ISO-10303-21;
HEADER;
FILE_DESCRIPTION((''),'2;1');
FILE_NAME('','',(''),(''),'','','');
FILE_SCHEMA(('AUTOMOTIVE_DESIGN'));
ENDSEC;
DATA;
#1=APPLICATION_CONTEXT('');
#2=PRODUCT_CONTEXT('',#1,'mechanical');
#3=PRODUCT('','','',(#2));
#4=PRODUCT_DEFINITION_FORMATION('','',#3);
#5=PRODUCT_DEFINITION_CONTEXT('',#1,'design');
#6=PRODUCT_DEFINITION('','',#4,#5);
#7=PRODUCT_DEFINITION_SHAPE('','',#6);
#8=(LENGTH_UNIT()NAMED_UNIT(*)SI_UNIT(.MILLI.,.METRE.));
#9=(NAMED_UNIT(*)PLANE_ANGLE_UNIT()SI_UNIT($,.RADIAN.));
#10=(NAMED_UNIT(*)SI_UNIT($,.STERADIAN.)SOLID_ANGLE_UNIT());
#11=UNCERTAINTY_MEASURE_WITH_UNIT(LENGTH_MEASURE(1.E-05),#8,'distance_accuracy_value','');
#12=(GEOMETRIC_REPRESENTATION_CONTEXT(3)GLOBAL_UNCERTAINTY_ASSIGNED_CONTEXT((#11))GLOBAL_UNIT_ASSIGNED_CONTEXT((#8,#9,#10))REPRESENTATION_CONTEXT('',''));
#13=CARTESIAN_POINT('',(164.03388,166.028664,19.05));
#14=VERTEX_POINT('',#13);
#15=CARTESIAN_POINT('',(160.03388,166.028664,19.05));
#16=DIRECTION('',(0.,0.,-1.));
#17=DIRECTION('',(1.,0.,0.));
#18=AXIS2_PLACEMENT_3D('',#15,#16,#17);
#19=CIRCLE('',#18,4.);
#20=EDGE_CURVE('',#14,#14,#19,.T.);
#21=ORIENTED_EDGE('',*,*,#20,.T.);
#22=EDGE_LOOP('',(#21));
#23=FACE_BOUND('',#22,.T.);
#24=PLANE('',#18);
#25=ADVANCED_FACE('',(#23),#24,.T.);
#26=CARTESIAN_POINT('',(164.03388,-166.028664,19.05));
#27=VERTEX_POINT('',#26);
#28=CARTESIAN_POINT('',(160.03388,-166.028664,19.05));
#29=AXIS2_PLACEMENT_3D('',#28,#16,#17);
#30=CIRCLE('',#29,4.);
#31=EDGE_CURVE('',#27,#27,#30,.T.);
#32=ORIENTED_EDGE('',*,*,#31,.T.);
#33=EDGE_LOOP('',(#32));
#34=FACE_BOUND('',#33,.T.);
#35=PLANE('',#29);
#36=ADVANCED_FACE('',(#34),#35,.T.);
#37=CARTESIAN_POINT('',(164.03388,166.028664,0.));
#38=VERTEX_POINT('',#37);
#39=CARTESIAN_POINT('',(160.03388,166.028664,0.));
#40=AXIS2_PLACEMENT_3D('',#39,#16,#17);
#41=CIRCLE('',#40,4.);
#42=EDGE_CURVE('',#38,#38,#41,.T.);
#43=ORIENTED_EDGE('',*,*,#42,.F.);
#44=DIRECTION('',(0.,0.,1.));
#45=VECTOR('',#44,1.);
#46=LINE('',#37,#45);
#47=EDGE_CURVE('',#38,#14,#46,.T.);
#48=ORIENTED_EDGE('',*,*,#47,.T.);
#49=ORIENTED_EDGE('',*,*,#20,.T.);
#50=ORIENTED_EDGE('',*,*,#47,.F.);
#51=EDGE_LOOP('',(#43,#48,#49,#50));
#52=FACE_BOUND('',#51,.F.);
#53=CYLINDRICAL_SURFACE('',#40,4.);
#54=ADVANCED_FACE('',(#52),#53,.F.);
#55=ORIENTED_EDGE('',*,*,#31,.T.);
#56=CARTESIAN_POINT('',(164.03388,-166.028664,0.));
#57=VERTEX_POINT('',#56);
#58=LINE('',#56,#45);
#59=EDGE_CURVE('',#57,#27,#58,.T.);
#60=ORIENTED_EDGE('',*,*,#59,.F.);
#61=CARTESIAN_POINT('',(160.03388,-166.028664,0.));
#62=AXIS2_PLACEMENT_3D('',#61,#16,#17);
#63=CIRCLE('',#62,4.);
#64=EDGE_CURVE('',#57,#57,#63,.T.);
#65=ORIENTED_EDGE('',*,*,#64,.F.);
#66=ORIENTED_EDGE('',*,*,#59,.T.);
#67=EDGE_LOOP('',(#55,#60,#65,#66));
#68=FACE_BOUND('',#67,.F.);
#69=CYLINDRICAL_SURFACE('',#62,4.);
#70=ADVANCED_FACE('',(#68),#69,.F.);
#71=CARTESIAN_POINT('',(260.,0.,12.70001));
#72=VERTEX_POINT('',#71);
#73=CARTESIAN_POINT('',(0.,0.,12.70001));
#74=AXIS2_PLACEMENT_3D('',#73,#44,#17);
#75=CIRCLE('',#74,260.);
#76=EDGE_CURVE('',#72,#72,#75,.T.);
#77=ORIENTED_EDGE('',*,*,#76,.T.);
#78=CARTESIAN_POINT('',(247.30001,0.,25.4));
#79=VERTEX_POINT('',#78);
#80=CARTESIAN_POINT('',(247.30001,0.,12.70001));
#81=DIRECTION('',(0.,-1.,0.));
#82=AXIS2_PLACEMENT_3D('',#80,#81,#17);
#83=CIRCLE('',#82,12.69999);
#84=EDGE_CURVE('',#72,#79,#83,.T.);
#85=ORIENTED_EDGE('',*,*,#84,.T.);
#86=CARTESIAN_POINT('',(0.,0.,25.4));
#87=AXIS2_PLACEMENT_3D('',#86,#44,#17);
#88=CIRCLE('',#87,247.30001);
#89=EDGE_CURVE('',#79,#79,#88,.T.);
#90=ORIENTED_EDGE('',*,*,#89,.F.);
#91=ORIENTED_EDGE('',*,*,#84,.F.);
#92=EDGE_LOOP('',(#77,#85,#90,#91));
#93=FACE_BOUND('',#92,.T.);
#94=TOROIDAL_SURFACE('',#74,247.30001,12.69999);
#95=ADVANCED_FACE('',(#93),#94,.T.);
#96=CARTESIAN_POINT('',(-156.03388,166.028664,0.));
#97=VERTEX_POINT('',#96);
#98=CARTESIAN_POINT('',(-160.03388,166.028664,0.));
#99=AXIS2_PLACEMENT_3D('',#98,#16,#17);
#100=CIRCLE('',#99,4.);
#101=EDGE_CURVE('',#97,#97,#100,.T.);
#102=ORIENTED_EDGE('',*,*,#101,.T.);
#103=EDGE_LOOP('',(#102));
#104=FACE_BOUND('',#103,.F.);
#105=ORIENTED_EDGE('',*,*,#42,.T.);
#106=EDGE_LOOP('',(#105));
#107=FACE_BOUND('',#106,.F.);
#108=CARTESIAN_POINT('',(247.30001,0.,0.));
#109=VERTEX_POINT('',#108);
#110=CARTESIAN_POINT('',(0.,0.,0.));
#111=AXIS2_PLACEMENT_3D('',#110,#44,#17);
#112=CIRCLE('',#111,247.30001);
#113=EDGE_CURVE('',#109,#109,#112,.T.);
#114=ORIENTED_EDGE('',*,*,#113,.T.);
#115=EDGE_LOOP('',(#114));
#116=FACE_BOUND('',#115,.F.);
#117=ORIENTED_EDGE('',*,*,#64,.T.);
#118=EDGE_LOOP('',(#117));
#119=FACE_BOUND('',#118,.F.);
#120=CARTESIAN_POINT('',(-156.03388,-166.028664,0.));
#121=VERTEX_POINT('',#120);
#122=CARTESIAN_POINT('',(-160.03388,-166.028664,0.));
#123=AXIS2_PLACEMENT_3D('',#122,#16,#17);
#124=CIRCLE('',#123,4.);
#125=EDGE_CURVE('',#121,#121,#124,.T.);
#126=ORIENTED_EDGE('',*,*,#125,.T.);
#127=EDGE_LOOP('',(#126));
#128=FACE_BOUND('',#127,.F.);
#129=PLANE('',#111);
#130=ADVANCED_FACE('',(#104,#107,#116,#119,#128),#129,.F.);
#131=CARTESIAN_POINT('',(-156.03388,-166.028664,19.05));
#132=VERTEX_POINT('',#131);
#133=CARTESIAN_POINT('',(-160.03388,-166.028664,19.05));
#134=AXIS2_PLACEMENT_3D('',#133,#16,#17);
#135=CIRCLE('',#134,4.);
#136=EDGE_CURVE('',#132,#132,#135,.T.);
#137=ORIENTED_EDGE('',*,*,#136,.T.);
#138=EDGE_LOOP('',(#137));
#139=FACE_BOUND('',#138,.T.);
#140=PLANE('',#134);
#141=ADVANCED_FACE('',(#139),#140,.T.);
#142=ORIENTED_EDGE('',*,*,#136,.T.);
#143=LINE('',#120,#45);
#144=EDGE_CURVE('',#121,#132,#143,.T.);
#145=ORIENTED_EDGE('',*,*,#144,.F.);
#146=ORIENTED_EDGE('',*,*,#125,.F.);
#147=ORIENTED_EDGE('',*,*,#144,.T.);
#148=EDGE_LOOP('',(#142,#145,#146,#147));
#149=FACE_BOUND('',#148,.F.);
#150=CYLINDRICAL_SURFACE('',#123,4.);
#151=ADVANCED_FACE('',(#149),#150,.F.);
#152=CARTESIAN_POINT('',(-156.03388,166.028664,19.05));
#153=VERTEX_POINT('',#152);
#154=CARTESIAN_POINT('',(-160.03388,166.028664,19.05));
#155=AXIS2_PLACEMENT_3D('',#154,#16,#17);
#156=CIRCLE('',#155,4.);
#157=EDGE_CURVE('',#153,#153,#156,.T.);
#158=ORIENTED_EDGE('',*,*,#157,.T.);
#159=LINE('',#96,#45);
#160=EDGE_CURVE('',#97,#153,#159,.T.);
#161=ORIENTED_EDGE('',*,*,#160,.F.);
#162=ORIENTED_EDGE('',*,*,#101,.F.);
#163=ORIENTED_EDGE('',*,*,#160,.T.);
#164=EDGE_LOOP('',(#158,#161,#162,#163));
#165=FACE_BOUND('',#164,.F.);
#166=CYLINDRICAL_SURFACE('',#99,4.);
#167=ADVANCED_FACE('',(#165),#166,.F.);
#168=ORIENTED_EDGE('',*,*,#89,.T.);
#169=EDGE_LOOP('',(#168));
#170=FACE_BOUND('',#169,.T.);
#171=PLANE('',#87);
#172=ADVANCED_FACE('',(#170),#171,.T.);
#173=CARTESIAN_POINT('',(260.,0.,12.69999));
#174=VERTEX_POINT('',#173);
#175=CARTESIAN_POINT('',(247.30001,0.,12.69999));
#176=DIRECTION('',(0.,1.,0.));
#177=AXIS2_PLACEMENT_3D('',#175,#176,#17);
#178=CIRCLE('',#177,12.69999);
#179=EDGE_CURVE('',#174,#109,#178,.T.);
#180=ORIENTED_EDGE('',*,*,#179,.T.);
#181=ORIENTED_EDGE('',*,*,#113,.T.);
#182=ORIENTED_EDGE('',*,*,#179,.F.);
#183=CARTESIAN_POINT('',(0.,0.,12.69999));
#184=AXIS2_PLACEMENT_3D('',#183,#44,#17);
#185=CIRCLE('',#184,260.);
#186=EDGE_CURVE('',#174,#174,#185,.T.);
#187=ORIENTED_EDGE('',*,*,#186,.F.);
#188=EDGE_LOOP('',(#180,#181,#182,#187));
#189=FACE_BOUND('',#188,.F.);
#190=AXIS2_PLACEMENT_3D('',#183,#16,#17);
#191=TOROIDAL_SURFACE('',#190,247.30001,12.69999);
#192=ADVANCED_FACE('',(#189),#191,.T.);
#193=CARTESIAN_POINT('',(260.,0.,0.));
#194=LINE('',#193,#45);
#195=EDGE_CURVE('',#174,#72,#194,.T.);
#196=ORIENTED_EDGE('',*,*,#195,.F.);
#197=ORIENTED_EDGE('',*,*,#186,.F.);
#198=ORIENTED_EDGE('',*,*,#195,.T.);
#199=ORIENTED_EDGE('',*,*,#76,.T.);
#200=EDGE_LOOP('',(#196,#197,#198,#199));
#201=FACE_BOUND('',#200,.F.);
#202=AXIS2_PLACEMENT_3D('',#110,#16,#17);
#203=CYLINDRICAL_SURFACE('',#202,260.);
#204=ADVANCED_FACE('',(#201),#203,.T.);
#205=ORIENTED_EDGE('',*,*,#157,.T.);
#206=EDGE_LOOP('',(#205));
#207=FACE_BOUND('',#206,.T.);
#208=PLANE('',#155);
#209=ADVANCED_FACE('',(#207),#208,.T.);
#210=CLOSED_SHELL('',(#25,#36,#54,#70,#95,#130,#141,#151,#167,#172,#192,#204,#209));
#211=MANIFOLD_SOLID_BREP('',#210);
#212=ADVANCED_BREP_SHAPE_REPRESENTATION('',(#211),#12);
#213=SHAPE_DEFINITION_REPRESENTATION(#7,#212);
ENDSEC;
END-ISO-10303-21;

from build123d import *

# Parameters (mm, degrees)
F0_R     = 260
F1_DEPTH = 25.4
F2_R     = 12.69999
F3_R     = 4
F4_DEPTH = 19.05
F5_DEPTH = 19.05


# Not quite as in the source:
# - a fillet or chamfer is up to 0.001 mm smaller than in the source, because OpenCascade refuses the exact size


with BuildPart() as f1:
    # F0 (on Top) → F1 (new body)
    with BuildSketch(Plane.XY):
        Circle(F0_R)
    extrude(amount=F1_DEPTH)

    # F2 (radius 12.7 in the source; OpenCascade refuses exactly that, so slightly less here)
    f2_edges = [f1.edges().sort_by_distance(p)[0] for p in [
        (-260, 0, 25.4),
        (-260, 0, 0),
    ]]
    fillet(f2_edges, radius=F2_R)

    # F3 (on face) → F4 (cut)
    with BuildSketch(Plane(origin=(0, 0, 0), x_dir=(1, 0, 0), z_dir=(0, 0, -1))):
        with Locations((160.0338797814, 166.028664158)):
            Circle(F3_R)
    extrude(amount=-F4_DEPTH, mode=Mode.SUBTRACT)

    # F3 (on face) → F5 (cut)
    with BuildSketch(Plane(origin=(0, 0, 0), x_dir=(1, 0, 0), z_dir=(0, 0, -1))):
        with Locations((-160.0338797814, 166.028664158)):
            Circle(F3_R)
        with Locations((160.0338797814, 166.028664158)):
            Circle(F3_R)
        with Locations((160.0338797814, -166.028664158)):
            Circle(F3_R)
        with Locations((-160.0338797814, -166.028664158)):
            Circle(F3_R)
    extrude(amount=-F5_DEPTH, mode=Mode.SUBTRACT)


solid = f1.part
